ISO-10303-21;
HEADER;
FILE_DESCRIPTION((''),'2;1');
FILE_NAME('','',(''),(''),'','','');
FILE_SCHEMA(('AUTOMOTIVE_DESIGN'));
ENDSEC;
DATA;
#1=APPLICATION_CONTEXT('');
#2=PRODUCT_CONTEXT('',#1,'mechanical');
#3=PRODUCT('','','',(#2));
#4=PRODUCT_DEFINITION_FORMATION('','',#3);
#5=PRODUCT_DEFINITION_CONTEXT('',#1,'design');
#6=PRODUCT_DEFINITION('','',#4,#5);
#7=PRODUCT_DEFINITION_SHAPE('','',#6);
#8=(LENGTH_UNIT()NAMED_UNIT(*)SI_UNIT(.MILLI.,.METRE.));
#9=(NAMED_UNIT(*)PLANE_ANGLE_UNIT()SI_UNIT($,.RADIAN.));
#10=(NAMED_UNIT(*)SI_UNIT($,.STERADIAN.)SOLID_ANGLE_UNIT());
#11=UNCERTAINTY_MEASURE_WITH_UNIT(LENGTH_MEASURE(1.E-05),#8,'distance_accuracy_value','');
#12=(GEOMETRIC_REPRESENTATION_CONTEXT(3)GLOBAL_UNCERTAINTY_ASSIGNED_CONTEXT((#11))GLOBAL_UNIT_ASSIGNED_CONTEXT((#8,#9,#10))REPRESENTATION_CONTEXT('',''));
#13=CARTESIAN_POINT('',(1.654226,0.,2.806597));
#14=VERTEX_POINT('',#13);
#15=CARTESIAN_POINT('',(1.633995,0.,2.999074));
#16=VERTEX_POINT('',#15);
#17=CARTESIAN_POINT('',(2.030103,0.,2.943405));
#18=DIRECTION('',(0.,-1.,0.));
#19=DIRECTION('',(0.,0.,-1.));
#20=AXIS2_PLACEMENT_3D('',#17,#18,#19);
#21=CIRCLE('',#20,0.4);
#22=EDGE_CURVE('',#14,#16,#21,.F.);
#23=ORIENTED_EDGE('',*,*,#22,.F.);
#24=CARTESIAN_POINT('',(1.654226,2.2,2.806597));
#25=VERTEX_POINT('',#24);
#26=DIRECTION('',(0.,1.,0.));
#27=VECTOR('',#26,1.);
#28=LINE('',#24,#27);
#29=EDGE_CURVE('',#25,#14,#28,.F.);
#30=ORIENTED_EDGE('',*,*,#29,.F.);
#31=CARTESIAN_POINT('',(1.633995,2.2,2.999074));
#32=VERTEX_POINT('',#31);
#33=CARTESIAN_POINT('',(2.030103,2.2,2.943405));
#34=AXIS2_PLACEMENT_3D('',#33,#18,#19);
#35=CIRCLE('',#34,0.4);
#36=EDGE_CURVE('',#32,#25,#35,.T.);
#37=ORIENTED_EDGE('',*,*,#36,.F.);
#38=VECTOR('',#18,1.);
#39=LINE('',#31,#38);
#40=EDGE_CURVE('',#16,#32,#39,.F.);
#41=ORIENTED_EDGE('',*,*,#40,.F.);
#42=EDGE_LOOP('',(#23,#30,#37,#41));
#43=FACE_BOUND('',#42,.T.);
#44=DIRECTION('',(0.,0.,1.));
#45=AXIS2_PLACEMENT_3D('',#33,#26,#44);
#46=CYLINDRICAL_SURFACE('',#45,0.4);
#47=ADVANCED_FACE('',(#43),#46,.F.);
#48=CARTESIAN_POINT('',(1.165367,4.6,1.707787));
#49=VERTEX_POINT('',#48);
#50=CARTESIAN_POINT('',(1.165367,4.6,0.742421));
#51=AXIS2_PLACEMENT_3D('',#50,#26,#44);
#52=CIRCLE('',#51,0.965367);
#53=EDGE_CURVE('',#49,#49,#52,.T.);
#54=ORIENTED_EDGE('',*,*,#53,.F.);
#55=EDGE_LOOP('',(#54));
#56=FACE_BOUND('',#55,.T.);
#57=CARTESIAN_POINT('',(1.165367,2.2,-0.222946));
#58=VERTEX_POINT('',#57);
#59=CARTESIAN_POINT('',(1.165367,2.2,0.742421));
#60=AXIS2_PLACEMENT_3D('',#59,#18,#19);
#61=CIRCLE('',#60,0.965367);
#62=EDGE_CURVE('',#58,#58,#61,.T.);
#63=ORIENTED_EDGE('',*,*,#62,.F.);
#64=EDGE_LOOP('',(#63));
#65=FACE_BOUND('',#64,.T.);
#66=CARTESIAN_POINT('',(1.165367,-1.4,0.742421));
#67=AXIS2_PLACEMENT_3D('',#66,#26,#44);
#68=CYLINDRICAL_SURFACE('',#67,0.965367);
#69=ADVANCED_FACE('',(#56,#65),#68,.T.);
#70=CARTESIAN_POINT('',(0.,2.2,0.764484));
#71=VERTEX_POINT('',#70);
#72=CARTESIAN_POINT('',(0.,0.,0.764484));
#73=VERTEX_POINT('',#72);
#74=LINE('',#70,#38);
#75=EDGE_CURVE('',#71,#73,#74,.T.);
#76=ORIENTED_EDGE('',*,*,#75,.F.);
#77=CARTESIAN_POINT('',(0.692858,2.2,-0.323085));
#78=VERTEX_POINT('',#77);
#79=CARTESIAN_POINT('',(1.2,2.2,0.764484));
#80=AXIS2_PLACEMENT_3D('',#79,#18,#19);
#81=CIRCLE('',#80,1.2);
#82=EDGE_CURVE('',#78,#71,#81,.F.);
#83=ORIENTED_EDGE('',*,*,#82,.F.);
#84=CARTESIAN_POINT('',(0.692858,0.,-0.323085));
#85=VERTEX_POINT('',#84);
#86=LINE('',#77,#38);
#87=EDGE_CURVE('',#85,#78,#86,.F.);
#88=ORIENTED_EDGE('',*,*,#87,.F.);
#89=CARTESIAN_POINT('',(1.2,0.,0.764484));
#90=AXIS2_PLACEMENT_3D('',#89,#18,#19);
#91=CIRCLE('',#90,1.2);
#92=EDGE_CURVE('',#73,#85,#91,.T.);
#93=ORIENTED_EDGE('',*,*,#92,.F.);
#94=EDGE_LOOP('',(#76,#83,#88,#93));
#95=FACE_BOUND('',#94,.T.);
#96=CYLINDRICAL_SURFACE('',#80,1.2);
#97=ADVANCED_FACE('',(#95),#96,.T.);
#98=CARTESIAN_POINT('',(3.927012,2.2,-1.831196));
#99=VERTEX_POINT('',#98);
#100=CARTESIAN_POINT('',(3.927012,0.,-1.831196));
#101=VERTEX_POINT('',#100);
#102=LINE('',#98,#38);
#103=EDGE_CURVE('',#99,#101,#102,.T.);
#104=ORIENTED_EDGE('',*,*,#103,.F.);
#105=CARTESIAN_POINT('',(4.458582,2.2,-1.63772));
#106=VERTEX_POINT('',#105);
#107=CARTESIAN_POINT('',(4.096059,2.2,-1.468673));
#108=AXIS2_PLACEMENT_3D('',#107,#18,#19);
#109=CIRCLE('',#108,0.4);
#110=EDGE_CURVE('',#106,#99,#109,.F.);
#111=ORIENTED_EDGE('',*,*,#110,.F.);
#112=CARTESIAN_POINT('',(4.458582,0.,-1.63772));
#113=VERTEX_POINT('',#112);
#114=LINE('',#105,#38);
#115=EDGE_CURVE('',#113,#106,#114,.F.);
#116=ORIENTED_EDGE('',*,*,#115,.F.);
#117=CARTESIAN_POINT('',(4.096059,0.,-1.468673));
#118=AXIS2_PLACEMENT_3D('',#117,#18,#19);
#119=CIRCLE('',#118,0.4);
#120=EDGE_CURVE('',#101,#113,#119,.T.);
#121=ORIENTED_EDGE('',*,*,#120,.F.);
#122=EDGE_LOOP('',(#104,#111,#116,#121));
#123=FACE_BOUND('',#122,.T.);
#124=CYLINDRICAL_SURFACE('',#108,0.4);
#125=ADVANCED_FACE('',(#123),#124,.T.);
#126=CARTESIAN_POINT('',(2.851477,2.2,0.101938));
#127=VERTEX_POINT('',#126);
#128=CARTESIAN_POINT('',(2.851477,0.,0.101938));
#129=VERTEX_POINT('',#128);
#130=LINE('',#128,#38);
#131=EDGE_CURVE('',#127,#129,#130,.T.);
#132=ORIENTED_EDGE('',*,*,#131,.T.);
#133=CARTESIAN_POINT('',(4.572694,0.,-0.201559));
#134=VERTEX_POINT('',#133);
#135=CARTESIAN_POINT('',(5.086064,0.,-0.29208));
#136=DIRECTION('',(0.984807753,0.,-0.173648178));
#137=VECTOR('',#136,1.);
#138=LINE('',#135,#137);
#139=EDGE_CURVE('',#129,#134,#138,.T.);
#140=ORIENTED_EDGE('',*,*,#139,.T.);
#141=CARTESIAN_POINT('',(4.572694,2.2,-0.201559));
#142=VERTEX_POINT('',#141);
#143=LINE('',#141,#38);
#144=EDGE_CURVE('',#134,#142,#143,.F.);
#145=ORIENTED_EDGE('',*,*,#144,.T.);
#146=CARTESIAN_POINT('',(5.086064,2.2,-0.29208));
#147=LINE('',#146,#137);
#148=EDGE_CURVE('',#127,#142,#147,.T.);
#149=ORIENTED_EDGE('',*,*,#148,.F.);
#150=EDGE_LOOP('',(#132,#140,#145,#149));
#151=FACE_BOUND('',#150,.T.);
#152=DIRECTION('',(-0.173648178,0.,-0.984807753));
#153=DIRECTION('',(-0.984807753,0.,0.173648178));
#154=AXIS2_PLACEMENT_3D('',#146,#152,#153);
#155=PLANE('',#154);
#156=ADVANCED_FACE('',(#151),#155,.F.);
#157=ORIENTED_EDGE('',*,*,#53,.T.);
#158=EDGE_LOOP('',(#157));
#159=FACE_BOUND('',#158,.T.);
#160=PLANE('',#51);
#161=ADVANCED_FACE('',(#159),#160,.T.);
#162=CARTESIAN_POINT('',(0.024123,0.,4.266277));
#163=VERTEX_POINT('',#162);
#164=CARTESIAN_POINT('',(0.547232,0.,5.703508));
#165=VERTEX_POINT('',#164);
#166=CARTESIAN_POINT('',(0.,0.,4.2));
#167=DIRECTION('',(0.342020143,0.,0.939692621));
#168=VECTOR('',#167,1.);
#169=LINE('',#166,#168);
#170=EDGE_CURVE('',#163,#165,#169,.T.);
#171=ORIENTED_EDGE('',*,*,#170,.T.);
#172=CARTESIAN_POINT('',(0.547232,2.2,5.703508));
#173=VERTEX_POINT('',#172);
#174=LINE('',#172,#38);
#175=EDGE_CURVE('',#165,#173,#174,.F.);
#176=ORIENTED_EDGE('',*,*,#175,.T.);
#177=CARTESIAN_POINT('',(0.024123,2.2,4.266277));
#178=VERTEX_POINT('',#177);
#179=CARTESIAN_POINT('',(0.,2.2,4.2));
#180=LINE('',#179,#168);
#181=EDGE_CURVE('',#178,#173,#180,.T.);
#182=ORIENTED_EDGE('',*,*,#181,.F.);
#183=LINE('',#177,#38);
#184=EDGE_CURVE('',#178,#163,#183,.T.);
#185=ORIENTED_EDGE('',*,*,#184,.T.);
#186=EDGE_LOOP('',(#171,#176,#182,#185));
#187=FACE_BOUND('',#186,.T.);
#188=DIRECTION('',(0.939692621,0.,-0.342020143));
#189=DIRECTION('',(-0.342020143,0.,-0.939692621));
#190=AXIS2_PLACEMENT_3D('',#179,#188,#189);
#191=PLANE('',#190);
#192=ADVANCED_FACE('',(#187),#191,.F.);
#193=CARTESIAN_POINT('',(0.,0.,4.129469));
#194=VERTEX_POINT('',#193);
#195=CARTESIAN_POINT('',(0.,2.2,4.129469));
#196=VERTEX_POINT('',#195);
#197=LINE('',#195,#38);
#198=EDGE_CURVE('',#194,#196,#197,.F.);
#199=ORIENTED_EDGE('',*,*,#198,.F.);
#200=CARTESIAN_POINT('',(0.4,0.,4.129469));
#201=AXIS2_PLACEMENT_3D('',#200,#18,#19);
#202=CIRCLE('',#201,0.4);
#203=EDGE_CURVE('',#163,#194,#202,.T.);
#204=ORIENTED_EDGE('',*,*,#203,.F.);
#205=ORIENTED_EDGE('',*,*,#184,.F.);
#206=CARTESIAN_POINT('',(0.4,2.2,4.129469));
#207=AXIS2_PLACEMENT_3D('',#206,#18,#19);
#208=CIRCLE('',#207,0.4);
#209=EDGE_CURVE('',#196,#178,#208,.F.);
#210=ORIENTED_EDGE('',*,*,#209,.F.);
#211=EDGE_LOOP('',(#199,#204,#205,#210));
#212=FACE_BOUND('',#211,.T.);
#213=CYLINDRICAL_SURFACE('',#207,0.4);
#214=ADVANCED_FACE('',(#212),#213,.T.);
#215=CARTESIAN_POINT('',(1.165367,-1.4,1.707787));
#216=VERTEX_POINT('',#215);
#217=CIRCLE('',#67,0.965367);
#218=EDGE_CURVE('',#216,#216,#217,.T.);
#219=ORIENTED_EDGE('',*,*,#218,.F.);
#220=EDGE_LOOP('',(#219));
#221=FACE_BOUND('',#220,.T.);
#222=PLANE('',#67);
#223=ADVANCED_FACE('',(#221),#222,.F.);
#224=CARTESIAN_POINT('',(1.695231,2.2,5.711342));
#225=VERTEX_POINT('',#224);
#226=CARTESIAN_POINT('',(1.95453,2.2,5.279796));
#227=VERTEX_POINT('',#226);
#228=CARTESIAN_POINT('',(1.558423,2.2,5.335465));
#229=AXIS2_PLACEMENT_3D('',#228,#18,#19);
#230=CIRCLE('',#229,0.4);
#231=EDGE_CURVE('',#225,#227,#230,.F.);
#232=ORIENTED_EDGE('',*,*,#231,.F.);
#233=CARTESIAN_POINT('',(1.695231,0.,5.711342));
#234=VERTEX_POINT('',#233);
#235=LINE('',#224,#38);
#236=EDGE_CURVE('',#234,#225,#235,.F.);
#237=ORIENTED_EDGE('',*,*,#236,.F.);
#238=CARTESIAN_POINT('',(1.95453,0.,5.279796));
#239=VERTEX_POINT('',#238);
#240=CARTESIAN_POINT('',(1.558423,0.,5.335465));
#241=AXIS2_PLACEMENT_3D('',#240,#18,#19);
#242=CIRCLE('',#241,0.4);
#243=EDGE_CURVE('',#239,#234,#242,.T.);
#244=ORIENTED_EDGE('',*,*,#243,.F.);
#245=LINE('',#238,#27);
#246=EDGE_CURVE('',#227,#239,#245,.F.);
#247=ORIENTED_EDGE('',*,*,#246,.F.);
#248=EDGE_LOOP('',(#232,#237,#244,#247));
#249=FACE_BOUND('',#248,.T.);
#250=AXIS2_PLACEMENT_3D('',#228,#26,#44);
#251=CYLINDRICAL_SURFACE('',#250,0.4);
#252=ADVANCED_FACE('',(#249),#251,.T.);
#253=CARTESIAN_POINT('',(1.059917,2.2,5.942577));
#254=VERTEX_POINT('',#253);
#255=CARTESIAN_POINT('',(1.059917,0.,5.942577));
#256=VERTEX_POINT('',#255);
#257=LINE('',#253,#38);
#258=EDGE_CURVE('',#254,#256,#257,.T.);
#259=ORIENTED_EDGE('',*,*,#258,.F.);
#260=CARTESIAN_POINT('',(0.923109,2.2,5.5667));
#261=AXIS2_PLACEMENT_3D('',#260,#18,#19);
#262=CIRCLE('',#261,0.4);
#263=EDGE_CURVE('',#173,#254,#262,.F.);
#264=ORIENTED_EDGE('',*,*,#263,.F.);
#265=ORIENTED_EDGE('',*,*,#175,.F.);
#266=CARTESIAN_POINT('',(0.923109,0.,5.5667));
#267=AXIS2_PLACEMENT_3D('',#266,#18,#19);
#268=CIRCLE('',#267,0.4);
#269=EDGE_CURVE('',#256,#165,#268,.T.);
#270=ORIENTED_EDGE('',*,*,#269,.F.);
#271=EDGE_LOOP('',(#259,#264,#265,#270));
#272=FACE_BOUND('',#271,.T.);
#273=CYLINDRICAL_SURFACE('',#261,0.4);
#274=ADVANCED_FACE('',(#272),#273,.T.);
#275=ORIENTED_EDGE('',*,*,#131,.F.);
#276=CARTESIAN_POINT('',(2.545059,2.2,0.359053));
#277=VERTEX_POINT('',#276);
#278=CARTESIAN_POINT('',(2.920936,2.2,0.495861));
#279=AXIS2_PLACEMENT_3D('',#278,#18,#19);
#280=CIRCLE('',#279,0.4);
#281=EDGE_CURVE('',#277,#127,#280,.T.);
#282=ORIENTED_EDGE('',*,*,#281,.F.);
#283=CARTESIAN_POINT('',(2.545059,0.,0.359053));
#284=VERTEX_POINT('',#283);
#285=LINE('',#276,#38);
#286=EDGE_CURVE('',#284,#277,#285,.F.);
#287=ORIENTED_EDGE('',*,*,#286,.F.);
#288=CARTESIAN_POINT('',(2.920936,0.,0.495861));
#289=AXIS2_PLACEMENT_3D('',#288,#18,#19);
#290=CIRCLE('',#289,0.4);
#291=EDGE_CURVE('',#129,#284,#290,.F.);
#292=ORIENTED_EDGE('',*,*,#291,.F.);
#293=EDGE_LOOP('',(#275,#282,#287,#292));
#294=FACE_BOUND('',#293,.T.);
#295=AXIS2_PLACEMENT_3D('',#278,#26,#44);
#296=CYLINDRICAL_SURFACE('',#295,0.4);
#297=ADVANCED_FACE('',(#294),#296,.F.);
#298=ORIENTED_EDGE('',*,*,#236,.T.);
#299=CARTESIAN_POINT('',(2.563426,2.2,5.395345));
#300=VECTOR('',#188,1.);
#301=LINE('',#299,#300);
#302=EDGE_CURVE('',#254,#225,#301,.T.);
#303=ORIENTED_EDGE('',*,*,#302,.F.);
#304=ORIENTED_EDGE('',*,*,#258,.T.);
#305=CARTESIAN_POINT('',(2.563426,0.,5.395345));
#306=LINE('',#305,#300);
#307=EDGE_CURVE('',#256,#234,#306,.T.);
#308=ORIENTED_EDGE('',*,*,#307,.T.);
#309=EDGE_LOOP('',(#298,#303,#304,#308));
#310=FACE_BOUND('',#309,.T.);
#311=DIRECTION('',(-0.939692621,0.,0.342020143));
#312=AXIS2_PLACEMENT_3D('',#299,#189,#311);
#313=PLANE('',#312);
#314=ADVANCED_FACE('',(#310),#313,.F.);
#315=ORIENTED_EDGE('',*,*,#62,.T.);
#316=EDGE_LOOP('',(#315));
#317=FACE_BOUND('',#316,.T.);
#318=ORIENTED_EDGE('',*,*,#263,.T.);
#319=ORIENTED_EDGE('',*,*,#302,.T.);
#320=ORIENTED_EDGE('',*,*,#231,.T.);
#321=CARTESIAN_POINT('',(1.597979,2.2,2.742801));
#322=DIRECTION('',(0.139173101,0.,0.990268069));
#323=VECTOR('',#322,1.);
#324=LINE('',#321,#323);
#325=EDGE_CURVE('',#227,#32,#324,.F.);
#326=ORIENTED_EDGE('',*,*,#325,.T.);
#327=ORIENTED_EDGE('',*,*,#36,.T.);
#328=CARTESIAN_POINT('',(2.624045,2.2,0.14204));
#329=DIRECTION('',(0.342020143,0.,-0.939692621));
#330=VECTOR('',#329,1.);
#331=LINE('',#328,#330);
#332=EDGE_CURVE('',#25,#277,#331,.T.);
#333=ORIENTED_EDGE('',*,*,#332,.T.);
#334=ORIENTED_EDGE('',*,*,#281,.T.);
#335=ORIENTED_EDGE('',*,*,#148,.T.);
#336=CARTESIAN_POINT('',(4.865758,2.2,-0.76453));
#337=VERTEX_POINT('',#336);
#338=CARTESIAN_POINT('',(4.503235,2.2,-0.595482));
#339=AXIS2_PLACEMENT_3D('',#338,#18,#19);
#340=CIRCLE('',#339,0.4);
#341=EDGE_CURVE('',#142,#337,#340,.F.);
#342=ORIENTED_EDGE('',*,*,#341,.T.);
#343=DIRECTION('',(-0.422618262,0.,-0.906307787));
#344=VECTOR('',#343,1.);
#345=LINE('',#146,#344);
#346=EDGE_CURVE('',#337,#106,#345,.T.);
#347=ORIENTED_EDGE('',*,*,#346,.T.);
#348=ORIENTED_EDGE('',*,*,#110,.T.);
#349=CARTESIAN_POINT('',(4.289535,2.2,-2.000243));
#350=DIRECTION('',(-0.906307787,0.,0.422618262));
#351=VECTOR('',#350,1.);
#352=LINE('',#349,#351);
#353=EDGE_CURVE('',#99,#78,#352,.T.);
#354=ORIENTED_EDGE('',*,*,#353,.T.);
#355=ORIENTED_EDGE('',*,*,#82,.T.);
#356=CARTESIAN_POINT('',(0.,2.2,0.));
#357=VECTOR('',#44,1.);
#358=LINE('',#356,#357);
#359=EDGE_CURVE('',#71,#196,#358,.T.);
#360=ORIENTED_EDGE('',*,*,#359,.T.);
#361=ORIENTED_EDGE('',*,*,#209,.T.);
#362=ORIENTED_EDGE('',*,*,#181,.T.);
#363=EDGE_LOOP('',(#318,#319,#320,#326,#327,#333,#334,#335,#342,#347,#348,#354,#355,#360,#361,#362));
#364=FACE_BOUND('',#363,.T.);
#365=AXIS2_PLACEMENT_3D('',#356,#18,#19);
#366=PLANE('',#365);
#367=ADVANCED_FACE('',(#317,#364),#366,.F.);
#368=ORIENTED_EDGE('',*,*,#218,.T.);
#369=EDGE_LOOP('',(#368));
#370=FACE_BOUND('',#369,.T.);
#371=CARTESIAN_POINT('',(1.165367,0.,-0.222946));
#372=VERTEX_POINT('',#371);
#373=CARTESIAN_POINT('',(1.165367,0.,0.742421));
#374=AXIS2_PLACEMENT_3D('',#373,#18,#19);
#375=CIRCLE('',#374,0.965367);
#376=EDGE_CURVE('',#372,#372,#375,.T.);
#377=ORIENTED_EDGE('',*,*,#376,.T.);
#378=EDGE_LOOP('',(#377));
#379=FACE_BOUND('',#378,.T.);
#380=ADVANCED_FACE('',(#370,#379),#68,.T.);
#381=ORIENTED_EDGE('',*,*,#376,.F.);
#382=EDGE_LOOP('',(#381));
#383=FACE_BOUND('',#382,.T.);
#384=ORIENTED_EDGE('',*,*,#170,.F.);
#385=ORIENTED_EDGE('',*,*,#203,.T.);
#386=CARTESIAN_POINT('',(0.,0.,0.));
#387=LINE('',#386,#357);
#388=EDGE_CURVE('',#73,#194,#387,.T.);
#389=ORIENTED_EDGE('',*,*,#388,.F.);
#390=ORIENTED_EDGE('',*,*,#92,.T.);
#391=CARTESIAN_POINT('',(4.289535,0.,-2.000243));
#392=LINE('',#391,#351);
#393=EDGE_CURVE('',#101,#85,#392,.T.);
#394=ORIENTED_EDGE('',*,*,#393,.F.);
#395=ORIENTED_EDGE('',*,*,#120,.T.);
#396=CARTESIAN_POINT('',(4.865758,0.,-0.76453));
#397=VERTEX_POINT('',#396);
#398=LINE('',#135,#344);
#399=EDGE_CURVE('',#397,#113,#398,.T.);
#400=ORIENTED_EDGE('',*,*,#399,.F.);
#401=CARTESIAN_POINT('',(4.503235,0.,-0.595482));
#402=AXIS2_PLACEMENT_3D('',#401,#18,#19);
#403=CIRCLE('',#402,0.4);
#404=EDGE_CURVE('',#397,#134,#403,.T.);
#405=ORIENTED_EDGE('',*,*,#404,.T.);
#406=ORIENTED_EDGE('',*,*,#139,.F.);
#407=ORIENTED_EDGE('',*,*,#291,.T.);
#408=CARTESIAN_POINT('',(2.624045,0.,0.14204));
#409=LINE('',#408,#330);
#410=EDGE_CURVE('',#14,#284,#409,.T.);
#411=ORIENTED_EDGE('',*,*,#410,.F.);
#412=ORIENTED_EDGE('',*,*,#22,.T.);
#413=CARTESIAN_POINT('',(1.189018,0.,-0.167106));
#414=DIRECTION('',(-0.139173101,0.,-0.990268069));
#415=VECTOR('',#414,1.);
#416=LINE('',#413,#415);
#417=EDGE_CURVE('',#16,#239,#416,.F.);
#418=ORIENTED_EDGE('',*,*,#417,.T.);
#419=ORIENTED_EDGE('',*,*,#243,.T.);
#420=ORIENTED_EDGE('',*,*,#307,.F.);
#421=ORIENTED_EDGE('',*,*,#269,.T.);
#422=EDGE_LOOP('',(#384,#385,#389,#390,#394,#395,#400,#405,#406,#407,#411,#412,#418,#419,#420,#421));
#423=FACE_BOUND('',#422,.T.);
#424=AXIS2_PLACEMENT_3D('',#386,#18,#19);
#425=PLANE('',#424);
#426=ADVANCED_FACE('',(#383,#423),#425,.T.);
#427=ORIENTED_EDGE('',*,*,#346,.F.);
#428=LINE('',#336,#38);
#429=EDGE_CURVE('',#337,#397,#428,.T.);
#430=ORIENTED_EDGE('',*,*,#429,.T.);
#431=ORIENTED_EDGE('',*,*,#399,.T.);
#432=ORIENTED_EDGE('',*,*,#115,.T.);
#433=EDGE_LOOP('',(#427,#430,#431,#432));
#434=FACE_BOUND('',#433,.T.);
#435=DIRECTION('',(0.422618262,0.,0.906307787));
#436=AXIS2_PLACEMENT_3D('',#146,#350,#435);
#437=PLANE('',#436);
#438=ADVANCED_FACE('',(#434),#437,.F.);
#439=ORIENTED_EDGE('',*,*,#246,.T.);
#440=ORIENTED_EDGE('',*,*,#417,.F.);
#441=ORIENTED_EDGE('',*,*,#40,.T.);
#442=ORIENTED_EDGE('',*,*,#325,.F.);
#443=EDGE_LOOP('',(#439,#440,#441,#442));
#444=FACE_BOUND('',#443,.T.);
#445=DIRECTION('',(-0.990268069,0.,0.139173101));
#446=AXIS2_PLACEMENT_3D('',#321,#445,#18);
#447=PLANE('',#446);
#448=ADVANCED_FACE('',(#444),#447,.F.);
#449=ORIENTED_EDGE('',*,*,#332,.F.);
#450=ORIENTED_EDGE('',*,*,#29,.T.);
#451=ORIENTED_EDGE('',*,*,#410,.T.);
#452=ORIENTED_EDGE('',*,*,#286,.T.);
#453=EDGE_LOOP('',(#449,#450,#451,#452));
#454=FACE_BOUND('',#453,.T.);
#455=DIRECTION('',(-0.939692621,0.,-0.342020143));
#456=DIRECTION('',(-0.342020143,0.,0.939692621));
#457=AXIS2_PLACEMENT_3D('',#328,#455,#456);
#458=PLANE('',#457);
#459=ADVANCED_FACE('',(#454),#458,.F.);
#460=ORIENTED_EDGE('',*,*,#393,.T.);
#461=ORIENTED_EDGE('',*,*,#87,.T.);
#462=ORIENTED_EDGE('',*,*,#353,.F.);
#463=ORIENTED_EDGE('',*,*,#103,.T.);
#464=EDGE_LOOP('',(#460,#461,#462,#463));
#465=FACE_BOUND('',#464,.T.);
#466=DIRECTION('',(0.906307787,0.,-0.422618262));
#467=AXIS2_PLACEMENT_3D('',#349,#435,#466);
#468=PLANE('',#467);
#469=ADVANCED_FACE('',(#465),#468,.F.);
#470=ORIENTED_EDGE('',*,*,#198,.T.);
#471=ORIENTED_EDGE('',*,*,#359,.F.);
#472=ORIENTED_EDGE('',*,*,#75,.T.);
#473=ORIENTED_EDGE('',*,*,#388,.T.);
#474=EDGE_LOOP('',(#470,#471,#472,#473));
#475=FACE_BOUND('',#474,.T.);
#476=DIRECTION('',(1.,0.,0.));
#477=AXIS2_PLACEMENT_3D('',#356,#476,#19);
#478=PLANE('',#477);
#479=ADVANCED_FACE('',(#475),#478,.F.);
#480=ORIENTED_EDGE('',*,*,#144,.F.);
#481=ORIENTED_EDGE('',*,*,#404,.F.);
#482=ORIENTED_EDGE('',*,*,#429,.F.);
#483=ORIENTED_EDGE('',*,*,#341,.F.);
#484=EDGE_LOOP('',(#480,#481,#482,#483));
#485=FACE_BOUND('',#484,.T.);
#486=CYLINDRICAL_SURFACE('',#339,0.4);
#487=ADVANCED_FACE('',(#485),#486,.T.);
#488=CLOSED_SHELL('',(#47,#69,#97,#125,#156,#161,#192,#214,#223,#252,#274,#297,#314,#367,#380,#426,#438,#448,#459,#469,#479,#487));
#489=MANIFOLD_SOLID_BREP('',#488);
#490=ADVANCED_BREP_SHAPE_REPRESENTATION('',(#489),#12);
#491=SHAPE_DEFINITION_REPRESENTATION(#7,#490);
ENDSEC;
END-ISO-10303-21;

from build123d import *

# Parameters (mm, degrees)
BOSS_EXTRUDE3_DEPTH      = 2.2
CHAMFER2_SIZE            = 0.6
CHAMFER2_SIZE_2          = 2.822778066
FILLET1_R                = 0.4
BOSS_EXTRUDE4_DEPTH      = 4.6
BOSS_EXTRUDE4_DEPTH_BACK = 1.4
SKETCH2_R                = 0.965366887
FILLET2_R                = 1.2


with BuildPart() as part:
    # Sketch1 → Boss-Extrude3 (new body)
    with BuildSketch(Plane(origin=(0, 0, 0), x_dir=(1, 0, 0), z_dir=(0, 1, 0))):
        Polygon((5.086064398, 0.292080247), (4.289535013, 2.000243026), (0, 0), (0, -4.2), (0.684040287, -6.079385242), (2.563425528, -5.395344955), (1.63771199, -2.851967912), (2.624045016, -0.142040197), align=None)
    extrude(amount=BOSS_EXTRUDE3_DEPTH)

    # Chamfer2
    # the kernel refuses this chamfer: 2.822778066, 0.6 mm, written as the material it takes off along each edge
    with BuildSketch(Plane(origin=(2.563425528, -7.333289373, 5.395344955), x_dir=(-0.865629936296976, 0, 0.5006843450583344), z_dir=(0, 1, 0))) as chamfer2_piece_1_section:
        Polygon((CHAMFER2_SIZE * 0.984670194927, -CHAMFER2_SIZE * 0.174426509515), (-CHAMFER2_SIZE_2 * 0.174426509496, -CHAMFER2_SIZE_2 * 0.984670194818), (0, 0), align=None)
    chamfer2_piece_1 = extrude(amount=16.866578746, mode=Mode.PRIVATE)
    chamfer2_piece_1 = split(chamfer2_piece_1, bisect_by=Plane(origin=(1.145577622, 1.1, 4.204095975), z_dir=(0.93969262078591, 0, 0.3420201433256644)), keep=Keep.TOP, mode=Mode.PRIVATE)
    add(chamfer2_piece_1, mode=Mode.SUBTRACT)

    # Fillet1
    fillet1_edges = [part.edges().sort_by_distance(p)[0] for p in [
        (4.289535013, 1.1, -2.000243026),
        (5.086064398, 1.1, -0.292080247),
        (2.624045016, 1.1, 0.142040197),
        (0.684040287, 1.1, 6.079385242),
        (0, 1.1, 4.2),
        (1.999609956, 1.1, 5.600557041),
        (1.620115519, 1.1, 2.900313819),
    ]]
    fillet(fillet1_edges, radius=FILLET1_R)

    # Sketch2 → Boss-Extrude4 (add, two sides: drawn at the far end of the back side and taken through both)
    with BuildSketch(Plane(origin=(0, 0, 0), x_dir=(1, 0, 0), z_dir=(0, 1, 0)).offset(-BOSS_EXTRUDE4_DEPTH_BACK)):
        with Locations(Location((1.165366887, -0.742420587, 0), (0, 0, 270))):
            Circle(SKETCH2_R)
    extrude(amount=BOSS_EXTRUDE4_DEPTH + BOSS_EXTRUDE4_DEPTH_BACK)

    # Fillet2
    fillet2_edges = [part.edges().sort_by_distance(p)[0] for p in [
        (0, 1.1, 0),
    ]]
    fillet(fillet2_edges, radius=FILLET2_R)


solid = part.part
